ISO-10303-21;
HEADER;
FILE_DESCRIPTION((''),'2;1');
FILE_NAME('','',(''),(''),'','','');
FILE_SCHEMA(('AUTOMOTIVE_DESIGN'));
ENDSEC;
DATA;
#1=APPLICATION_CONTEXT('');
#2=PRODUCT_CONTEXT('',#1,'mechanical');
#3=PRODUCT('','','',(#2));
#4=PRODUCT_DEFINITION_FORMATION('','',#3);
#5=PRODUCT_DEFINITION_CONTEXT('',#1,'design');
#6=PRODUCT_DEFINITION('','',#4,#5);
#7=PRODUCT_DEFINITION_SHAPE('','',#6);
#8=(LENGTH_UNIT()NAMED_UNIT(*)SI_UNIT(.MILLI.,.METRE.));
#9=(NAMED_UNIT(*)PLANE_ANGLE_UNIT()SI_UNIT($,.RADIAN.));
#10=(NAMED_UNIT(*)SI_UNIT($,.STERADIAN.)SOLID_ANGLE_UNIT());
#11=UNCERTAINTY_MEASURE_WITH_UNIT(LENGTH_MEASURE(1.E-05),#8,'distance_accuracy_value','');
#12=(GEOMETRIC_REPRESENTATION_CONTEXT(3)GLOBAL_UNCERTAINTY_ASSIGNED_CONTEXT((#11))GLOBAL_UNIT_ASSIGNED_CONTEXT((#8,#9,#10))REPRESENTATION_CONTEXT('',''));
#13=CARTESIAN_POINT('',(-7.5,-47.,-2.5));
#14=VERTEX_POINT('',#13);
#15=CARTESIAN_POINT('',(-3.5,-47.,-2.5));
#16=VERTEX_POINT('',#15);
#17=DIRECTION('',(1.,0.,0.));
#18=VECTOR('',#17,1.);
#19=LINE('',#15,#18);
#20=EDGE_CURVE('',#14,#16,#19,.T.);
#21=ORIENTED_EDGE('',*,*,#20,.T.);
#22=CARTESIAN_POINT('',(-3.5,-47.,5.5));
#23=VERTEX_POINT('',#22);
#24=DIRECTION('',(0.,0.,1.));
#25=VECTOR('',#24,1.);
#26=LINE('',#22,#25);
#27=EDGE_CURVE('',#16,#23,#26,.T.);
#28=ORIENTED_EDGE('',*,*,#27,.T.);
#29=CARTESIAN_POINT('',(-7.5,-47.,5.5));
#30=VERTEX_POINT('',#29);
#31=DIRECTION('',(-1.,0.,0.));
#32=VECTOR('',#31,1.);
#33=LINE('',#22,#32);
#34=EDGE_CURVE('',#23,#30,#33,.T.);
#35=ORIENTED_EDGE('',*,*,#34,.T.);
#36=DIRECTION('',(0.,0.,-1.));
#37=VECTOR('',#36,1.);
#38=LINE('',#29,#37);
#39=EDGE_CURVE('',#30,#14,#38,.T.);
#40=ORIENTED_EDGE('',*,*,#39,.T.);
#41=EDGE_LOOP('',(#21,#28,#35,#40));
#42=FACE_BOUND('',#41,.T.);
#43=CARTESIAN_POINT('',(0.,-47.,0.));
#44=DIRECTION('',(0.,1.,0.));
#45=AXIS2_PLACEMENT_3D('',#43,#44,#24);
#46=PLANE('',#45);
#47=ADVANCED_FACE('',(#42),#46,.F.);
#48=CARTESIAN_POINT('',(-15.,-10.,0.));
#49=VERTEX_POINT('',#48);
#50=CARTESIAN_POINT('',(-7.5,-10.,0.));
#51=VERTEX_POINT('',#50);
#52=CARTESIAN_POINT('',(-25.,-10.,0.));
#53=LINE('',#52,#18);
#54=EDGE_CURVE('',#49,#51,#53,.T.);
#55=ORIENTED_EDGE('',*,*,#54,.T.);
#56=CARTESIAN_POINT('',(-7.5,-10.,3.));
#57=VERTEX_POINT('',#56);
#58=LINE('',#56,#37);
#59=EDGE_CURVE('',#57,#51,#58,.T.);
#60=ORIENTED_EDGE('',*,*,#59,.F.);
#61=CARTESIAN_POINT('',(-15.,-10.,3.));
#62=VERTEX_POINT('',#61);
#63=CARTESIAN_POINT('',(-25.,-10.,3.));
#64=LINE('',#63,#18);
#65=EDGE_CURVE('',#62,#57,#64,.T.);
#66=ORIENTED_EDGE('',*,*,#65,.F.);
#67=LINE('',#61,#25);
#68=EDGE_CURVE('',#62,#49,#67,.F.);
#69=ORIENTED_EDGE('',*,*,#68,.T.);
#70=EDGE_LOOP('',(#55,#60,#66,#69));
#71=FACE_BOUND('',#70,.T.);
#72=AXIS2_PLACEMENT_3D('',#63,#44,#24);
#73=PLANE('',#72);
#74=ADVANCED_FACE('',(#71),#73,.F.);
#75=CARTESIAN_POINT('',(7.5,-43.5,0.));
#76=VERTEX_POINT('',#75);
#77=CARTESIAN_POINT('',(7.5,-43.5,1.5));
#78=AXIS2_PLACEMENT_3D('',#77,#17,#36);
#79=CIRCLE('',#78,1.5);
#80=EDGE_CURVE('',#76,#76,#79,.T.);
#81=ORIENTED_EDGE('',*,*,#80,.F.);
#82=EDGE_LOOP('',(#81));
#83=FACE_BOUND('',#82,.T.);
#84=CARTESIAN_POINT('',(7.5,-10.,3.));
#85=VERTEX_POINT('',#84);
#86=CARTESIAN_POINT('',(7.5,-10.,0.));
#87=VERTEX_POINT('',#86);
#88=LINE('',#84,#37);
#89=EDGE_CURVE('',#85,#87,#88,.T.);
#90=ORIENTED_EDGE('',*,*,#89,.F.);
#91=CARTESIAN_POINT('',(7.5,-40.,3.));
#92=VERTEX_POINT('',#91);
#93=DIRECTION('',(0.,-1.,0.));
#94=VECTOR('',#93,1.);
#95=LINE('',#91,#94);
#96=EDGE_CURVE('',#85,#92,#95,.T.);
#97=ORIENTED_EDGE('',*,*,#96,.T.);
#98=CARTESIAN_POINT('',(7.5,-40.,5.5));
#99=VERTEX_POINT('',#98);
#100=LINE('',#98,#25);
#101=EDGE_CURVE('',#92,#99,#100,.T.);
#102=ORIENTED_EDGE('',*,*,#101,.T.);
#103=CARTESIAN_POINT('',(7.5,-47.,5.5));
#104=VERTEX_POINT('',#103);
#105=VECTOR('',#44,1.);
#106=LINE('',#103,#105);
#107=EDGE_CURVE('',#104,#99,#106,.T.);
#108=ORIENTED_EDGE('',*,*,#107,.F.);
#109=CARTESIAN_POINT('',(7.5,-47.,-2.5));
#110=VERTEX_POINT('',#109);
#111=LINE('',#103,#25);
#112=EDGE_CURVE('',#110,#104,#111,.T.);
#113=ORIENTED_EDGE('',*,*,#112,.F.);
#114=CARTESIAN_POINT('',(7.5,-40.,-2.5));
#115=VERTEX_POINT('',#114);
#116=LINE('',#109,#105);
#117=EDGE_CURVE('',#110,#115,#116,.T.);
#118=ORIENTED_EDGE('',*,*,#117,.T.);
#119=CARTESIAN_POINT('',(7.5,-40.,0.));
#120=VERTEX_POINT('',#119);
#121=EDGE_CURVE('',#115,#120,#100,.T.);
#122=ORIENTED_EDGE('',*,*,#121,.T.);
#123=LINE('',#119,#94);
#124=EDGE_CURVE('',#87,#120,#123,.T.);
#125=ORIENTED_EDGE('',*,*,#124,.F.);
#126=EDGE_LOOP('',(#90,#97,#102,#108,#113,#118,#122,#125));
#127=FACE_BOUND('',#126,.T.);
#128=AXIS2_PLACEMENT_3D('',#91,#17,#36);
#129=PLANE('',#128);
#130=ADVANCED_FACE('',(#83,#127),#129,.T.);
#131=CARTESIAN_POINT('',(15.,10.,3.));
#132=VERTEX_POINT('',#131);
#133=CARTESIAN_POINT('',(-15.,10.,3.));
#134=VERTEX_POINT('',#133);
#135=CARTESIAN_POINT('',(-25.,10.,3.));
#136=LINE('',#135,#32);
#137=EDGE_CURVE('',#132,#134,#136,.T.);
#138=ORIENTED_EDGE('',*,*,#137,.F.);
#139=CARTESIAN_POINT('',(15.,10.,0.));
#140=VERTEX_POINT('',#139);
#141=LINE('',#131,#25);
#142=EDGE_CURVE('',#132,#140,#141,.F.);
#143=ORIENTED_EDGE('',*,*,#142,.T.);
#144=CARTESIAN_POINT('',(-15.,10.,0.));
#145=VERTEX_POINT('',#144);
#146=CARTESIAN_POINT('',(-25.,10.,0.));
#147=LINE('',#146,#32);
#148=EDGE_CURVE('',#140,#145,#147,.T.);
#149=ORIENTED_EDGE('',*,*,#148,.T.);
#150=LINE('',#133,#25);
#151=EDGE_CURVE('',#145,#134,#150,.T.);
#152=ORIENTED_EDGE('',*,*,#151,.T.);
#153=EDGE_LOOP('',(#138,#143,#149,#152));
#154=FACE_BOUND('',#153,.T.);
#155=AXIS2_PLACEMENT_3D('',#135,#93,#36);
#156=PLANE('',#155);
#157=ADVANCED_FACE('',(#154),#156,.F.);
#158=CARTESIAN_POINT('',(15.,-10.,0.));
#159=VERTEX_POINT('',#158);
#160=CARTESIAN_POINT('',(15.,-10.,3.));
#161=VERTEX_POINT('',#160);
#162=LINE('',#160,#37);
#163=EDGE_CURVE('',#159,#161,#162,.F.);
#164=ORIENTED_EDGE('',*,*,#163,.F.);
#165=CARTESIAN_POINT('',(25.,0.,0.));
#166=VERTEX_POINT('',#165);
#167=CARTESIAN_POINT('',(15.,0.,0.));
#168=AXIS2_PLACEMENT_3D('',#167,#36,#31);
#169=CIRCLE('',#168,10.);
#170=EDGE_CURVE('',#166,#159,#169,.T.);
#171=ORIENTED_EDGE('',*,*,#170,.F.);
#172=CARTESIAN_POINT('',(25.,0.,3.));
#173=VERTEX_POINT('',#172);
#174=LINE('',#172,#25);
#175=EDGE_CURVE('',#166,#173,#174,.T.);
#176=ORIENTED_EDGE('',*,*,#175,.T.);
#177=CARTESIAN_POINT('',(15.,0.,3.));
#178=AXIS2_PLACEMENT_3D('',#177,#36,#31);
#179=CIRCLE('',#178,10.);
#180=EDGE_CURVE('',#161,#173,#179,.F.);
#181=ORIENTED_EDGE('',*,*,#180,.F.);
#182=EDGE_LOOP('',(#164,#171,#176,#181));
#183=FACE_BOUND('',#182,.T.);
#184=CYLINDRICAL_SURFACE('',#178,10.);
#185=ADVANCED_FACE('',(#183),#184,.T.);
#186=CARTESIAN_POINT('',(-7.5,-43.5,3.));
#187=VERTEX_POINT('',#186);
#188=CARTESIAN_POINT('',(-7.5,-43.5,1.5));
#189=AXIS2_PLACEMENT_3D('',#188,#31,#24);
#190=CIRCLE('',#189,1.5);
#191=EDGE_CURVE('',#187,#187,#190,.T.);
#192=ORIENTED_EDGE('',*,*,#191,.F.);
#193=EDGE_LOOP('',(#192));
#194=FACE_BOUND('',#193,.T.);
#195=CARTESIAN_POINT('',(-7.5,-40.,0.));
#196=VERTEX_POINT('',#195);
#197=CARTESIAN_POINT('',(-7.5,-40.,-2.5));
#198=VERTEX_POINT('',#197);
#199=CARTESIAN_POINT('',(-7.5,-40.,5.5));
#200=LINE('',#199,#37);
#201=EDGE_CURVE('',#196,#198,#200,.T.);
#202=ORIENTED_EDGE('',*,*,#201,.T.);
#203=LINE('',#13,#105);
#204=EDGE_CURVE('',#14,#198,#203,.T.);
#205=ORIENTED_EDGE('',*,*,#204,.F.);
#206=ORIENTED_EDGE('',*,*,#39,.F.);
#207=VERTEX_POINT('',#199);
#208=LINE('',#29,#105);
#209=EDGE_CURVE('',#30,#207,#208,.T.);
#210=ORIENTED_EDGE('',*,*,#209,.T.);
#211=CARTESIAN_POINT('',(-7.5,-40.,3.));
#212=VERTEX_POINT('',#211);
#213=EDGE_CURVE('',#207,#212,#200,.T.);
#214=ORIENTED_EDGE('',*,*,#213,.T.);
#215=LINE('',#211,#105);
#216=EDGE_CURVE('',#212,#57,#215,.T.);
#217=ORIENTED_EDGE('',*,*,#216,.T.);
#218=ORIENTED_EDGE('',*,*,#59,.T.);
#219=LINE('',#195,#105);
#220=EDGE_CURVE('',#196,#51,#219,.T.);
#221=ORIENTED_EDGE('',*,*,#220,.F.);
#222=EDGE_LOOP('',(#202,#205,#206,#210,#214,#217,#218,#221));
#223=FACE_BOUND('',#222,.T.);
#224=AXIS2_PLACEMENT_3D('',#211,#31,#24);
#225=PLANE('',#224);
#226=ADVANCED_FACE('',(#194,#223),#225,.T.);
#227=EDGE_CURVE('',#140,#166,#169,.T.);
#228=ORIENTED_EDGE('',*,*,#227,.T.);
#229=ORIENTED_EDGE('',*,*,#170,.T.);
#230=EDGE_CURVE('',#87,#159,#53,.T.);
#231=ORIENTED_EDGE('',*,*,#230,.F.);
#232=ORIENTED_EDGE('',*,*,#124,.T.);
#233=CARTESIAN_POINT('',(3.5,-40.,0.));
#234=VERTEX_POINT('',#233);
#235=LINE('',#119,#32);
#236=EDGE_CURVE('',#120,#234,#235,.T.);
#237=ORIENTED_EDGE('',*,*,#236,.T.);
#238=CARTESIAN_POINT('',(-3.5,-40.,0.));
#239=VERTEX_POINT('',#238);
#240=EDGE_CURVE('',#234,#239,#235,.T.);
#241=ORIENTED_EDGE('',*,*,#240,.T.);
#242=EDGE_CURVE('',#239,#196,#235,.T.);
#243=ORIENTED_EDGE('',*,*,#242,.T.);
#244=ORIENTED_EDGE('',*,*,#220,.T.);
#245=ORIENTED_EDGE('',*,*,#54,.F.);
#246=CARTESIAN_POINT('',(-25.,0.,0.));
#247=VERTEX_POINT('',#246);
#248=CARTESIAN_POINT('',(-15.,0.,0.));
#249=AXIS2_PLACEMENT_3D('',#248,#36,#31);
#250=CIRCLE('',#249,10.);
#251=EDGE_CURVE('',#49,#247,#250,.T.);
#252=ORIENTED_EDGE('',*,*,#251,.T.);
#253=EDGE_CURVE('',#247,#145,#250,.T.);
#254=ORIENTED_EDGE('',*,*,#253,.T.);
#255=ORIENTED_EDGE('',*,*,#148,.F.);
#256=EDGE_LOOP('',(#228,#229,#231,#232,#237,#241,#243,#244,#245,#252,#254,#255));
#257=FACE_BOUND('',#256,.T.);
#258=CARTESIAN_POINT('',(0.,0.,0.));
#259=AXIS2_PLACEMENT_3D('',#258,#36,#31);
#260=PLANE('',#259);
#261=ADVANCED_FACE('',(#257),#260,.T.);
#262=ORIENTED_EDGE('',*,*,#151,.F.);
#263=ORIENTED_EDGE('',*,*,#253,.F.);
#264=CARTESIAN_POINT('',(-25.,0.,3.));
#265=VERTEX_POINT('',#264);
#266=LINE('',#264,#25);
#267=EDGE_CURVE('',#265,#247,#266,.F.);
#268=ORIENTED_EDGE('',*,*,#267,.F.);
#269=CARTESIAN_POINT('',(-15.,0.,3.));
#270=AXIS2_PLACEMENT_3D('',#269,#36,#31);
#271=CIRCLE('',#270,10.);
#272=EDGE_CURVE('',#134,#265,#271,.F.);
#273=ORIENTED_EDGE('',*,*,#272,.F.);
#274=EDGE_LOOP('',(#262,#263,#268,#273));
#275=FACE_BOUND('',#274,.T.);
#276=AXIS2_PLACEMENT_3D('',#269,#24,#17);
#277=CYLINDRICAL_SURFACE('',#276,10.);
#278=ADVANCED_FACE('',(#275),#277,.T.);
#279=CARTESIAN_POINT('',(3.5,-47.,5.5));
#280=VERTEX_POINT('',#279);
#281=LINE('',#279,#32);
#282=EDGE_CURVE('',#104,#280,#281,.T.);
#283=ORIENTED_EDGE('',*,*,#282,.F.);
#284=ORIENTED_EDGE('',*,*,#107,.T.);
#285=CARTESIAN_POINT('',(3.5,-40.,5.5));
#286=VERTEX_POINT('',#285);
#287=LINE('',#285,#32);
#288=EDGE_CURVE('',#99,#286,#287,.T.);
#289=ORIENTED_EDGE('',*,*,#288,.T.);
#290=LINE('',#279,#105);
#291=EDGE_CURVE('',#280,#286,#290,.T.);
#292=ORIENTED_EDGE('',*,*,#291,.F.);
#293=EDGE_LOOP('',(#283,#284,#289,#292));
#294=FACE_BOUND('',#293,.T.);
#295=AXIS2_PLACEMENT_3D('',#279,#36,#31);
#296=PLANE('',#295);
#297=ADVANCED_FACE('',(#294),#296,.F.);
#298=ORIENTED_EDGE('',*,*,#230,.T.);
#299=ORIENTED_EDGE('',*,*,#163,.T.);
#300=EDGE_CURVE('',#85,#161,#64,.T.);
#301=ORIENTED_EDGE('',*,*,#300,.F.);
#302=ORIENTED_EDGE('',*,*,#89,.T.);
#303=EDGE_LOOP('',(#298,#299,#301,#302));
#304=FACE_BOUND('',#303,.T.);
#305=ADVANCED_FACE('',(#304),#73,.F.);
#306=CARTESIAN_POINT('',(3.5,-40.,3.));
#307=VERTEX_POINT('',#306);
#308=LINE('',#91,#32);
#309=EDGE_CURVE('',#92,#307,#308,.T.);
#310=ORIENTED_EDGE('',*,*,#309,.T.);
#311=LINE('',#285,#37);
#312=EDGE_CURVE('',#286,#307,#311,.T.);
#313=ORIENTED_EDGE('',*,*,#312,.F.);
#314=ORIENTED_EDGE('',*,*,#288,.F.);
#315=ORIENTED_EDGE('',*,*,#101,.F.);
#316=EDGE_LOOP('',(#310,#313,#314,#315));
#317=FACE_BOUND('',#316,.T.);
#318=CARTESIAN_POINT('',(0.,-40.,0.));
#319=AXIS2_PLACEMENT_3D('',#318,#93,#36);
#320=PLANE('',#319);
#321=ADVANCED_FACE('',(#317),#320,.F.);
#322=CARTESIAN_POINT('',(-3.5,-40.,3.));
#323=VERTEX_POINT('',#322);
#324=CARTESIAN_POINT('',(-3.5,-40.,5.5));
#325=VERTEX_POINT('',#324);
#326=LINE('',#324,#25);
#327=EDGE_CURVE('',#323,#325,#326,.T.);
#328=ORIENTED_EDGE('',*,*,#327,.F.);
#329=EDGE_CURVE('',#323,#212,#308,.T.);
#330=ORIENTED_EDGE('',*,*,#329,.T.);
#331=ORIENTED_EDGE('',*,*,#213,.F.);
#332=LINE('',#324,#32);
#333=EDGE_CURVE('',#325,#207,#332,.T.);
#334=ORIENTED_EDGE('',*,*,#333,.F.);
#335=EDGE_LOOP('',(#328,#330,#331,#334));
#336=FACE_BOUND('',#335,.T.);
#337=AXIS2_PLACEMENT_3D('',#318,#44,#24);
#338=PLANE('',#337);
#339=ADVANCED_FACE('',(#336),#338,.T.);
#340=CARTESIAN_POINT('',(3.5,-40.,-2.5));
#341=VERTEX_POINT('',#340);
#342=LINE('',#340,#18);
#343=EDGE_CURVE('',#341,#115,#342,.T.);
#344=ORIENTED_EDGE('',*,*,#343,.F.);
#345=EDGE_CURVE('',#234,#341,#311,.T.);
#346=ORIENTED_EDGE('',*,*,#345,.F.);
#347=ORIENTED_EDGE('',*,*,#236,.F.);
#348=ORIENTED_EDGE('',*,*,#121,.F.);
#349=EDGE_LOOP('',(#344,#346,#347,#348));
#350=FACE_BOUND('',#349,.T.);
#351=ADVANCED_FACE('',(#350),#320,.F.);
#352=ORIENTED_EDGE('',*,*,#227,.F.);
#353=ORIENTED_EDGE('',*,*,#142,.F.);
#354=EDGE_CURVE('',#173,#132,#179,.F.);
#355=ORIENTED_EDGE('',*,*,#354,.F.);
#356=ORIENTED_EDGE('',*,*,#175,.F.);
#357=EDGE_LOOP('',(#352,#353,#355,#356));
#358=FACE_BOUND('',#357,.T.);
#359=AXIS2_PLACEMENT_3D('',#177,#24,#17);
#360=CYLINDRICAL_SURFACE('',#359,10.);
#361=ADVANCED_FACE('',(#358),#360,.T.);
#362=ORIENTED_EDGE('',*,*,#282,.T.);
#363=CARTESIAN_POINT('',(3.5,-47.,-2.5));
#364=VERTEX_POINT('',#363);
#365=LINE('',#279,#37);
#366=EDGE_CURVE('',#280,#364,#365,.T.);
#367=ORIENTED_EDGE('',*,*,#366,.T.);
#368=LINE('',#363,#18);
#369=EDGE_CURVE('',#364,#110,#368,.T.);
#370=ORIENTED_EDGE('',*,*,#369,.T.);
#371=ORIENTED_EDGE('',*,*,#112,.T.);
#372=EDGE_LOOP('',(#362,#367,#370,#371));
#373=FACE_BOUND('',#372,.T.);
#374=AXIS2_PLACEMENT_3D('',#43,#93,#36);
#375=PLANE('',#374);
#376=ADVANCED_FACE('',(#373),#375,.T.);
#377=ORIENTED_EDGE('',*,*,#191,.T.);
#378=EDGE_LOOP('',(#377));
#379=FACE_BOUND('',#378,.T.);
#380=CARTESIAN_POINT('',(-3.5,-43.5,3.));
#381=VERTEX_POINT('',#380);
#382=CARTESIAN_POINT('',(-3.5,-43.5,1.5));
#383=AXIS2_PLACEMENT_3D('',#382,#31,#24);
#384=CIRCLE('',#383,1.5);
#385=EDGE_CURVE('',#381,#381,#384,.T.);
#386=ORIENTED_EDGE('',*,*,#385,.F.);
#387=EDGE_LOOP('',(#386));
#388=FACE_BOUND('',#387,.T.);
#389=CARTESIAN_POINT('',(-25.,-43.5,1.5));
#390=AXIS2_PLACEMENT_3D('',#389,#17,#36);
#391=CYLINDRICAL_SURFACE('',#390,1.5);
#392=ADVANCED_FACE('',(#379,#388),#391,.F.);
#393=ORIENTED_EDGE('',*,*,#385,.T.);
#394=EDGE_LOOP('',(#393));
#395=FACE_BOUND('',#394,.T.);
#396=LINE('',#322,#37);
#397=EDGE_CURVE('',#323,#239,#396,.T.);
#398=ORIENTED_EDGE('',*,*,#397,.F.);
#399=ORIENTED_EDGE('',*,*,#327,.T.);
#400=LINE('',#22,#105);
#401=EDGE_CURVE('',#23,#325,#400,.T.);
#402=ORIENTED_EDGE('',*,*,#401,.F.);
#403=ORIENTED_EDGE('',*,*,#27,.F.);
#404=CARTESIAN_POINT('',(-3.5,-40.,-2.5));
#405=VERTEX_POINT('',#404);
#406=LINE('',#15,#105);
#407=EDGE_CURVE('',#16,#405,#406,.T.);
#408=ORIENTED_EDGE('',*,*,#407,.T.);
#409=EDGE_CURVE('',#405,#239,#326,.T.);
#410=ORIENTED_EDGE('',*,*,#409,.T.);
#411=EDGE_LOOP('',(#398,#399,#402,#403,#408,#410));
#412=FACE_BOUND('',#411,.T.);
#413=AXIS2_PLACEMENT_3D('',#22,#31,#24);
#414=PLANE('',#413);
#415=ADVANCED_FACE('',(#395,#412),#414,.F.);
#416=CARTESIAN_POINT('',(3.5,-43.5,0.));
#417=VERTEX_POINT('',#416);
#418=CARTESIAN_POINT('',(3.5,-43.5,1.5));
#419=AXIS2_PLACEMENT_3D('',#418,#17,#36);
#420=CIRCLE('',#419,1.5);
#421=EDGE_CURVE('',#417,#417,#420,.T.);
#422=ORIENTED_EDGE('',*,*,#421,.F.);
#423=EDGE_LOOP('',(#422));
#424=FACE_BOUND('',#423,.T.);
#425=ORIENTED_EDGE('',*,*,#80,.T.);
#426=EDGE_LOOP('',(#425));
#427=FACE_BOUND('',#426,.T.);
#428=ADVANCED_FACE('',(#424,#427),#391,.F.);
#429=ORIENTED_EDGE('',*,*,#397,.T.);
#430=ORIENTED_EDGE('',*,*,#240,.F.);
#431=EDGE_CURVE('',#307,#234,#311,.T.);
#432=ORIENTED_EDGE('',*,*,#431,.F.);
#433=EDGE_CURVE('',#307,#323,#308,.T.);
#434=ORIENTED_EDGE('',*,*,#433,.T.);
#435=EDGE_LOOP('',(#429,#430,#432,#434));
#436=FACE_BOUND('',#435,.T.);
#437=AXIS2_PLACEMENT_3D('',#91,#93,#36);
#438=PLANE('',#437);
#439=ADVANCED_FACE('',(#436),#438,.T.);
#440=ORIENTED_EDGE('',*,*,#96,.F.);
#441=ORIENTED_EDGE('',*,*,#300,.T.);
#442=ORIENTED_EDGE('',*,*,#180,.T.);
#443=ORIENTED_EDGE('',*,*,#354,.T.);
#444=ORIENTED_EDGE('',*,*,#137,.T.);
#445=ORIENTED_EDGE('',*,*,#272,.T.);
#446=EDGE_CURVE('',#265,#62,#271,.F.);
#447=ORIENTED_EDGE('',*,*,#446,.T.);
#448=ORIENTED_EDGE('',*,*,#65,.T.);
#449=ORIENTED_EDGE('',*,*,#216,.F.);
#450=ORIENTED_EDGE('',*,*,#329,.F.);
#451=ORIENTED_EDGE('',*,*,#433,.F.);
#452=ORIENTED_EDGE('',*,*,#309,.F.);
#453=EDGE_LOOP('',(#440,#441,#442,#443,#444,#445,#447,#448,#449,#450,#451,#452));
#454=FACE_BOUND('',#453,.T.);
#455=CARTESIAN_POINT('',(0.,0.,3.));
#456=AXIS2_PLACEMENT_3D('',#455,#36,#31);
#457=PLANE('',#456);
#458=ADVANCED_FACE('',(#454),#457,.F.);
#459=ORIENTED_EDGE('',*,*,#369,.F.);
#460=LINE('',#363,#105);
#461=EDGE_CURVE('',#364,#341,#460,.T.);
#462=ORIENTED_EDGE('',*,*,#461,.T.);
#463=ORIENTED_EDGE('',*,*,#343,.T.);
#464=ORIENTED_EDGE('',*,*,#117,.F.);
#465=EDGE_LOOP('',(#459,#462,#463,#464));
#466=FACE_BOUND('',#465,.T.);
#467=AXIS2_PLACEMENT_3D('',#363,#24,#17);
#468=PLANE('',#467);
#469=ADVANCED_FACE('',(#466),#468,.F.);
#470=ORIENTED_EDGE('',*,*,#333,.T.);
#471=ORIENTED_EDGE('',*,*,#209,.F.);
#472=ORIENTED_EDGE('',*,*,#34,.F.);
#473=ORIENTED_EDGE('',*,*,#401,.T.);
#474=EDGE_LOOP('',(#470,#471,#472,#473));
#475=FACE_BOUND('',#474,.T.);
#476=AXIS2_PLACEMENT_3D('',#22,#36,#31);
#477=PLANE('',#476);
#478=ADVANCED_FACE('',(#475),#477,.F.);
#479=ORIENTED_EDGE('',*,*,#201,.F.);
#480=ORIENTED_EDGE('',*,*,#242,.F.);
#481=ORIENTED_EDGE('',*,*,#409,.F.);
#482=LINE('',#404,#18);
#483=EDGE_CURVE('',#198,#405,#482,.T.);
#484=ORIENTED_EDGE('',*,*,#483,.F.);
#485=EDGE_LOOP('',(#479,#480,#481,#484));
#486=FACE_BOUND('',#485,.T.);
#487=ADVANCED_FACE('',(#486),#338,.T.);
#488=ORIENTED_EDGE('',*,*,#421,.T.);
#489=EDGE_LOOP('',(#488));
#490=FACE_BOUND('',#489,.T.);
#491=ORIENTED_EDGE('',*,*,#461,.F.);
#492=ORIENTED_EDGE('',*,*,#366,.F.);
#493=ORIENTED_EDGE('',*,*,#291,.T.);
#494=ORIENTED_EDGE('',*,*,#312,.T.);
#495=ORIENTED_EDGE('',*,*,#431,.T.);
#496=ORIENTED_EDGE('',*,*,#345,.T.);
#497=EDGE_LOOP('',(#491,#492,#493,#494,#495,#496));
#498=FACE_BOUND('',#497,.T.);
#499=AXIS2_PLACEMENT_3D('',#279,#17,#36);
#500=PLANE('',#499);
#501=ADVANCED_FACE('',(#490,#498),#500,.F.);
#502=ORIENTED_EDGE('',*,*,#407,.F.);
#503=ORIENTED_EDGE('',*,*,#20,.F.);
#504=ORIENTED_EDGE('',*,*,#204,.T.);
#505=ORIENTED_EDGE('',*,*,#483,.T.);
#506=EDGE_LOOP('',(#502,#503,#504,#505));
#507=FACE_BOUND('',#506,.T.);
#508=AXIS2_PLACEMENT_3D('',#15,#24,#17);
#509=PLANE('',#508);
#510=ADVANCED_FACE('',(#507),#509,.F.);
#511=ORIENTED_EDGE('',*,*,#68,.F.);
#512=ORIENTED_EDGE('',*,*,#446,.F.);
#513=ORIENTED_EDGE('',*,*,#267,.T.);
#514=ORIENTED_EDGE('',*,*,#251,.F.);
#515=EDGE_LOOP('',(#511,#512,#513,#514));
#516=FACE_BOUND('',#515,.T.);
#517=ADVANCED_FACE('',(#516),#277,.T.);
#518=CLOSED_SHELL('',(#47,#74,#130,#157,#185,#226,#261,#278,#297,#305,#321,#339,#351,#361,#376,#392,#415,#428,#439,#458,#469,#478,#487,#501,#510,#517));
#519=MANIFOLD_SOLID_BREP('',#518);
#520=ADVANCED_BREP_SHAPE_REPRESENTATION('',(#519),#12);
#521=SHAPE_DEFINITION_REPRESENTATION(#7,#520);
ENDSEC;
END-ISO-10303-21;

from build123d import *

# Parameters (mm, degrees)
SKETCH_1_W          = 50
SKETCH_1_H          = 20
EXTRUDE_1_DEPTH     = 3
FILLET_1_R          = 10
FILLET_2_R          = 10
FILLET_3_R          = 10
FILLET_4_R          = 10
SKETCH_2_W          = 15
SKETCH_2_H          = 30
EXTRUDE_2_DEPTH     = 3
SKETCH_4_W          = 4
SKETCH_4_H          = 8
EXTRUDE_4_DEPTH     = 7
SKETCH_5_R          = 1.5
CUT_EXTRUDE_1_DEPTH = 58.406445631


with BuildPart() as part:
    # 草图1 → 凸台-拉伸1 (new body)
    with BuildSketch(Plane.XY):
        Rectangle(SKETCH_1_W, SKETCH_1_H)
    extrude(amount=EXTRUDE_1_DEPTH)

    # 圆角1
    fillet_1_edges = [part.edges().sort_by_distance(p)[0] for p in [
        (25, 10, 1.5),
    ]]
    fillet(fillet_1_edges, radius=FILLET_1_R)

    # 圆角2
    fillet_2_edges = [part.edges().sort_by_distance(p)[0] for p in [
        (-25, 10, 1.5),
    ]]
    fillet(fillet_2_edges, radius=FILLET_2_R)

    # 圆角3
    fillet_3_edges = [part.edges().sort_by_distance(p)[0] for p in [
        (25, -10, 1.5),
    ]]
    fillet(fillet_3_edges, radius=FILLET_3_R - 0.0001)  # a hair under: the kernel refuses the full size

    # 圆角4
    fillet_4_edges = [part.edges().sort_by_distance(p)[0] for p in [
        (-25, -10, 1.5),
    ]]
    fillet(fillet_4_edges, radius=FILLET_4_R - 0.0001)  # a hair under: the kernel refuses the full size

    # 草图2 → 凸台-拉伸2 (add)
    with BuildSketch(Plane(origin=(0, 0, 0), x_dir=(-1, 0, 0), z_dir=(0, 0, -1))):
        with Locations((0, -25)):
            Rectangle(SKETCH_2_W, SKETCH_2_H)
    extrude(amount=-EXTRUDE_2_DEPTH)

    # 草图4 → 凸台-拉伸4 (add)
    with BuildSketch(Plane(origin=(0, -40, 0), x_dir=(-1, 0, 0), z_dir=(0, -1, 0))):
        with Locations((-5.5, -1.5)):
            Rectangle(SKETCH_4_W, SKETCH_4_H)
        with Locations((5.5, -1.5)):
            Rectangle(SKETCH_4_W, SKETCH_4_H)
    extrude(amount=EXTRUDE_4_DEPTH)

    # 草图5 → 切除-拉伸1 (cut, through all)
    with BuildSketch(Plane(origin=(7.5, 0, 0), x_dir=(0, 0, -1), z_dir=(1, 0, 0))):
        with Locations(Location((-1.5, -43.5, 0), (0, 0, 180))):
            Circle(SKETCH_5_R)
    extrude(amount=-CUT_EXTRUDE_1_DEPTH, mode=Mode.SUBTRACT)


solid = part.part
